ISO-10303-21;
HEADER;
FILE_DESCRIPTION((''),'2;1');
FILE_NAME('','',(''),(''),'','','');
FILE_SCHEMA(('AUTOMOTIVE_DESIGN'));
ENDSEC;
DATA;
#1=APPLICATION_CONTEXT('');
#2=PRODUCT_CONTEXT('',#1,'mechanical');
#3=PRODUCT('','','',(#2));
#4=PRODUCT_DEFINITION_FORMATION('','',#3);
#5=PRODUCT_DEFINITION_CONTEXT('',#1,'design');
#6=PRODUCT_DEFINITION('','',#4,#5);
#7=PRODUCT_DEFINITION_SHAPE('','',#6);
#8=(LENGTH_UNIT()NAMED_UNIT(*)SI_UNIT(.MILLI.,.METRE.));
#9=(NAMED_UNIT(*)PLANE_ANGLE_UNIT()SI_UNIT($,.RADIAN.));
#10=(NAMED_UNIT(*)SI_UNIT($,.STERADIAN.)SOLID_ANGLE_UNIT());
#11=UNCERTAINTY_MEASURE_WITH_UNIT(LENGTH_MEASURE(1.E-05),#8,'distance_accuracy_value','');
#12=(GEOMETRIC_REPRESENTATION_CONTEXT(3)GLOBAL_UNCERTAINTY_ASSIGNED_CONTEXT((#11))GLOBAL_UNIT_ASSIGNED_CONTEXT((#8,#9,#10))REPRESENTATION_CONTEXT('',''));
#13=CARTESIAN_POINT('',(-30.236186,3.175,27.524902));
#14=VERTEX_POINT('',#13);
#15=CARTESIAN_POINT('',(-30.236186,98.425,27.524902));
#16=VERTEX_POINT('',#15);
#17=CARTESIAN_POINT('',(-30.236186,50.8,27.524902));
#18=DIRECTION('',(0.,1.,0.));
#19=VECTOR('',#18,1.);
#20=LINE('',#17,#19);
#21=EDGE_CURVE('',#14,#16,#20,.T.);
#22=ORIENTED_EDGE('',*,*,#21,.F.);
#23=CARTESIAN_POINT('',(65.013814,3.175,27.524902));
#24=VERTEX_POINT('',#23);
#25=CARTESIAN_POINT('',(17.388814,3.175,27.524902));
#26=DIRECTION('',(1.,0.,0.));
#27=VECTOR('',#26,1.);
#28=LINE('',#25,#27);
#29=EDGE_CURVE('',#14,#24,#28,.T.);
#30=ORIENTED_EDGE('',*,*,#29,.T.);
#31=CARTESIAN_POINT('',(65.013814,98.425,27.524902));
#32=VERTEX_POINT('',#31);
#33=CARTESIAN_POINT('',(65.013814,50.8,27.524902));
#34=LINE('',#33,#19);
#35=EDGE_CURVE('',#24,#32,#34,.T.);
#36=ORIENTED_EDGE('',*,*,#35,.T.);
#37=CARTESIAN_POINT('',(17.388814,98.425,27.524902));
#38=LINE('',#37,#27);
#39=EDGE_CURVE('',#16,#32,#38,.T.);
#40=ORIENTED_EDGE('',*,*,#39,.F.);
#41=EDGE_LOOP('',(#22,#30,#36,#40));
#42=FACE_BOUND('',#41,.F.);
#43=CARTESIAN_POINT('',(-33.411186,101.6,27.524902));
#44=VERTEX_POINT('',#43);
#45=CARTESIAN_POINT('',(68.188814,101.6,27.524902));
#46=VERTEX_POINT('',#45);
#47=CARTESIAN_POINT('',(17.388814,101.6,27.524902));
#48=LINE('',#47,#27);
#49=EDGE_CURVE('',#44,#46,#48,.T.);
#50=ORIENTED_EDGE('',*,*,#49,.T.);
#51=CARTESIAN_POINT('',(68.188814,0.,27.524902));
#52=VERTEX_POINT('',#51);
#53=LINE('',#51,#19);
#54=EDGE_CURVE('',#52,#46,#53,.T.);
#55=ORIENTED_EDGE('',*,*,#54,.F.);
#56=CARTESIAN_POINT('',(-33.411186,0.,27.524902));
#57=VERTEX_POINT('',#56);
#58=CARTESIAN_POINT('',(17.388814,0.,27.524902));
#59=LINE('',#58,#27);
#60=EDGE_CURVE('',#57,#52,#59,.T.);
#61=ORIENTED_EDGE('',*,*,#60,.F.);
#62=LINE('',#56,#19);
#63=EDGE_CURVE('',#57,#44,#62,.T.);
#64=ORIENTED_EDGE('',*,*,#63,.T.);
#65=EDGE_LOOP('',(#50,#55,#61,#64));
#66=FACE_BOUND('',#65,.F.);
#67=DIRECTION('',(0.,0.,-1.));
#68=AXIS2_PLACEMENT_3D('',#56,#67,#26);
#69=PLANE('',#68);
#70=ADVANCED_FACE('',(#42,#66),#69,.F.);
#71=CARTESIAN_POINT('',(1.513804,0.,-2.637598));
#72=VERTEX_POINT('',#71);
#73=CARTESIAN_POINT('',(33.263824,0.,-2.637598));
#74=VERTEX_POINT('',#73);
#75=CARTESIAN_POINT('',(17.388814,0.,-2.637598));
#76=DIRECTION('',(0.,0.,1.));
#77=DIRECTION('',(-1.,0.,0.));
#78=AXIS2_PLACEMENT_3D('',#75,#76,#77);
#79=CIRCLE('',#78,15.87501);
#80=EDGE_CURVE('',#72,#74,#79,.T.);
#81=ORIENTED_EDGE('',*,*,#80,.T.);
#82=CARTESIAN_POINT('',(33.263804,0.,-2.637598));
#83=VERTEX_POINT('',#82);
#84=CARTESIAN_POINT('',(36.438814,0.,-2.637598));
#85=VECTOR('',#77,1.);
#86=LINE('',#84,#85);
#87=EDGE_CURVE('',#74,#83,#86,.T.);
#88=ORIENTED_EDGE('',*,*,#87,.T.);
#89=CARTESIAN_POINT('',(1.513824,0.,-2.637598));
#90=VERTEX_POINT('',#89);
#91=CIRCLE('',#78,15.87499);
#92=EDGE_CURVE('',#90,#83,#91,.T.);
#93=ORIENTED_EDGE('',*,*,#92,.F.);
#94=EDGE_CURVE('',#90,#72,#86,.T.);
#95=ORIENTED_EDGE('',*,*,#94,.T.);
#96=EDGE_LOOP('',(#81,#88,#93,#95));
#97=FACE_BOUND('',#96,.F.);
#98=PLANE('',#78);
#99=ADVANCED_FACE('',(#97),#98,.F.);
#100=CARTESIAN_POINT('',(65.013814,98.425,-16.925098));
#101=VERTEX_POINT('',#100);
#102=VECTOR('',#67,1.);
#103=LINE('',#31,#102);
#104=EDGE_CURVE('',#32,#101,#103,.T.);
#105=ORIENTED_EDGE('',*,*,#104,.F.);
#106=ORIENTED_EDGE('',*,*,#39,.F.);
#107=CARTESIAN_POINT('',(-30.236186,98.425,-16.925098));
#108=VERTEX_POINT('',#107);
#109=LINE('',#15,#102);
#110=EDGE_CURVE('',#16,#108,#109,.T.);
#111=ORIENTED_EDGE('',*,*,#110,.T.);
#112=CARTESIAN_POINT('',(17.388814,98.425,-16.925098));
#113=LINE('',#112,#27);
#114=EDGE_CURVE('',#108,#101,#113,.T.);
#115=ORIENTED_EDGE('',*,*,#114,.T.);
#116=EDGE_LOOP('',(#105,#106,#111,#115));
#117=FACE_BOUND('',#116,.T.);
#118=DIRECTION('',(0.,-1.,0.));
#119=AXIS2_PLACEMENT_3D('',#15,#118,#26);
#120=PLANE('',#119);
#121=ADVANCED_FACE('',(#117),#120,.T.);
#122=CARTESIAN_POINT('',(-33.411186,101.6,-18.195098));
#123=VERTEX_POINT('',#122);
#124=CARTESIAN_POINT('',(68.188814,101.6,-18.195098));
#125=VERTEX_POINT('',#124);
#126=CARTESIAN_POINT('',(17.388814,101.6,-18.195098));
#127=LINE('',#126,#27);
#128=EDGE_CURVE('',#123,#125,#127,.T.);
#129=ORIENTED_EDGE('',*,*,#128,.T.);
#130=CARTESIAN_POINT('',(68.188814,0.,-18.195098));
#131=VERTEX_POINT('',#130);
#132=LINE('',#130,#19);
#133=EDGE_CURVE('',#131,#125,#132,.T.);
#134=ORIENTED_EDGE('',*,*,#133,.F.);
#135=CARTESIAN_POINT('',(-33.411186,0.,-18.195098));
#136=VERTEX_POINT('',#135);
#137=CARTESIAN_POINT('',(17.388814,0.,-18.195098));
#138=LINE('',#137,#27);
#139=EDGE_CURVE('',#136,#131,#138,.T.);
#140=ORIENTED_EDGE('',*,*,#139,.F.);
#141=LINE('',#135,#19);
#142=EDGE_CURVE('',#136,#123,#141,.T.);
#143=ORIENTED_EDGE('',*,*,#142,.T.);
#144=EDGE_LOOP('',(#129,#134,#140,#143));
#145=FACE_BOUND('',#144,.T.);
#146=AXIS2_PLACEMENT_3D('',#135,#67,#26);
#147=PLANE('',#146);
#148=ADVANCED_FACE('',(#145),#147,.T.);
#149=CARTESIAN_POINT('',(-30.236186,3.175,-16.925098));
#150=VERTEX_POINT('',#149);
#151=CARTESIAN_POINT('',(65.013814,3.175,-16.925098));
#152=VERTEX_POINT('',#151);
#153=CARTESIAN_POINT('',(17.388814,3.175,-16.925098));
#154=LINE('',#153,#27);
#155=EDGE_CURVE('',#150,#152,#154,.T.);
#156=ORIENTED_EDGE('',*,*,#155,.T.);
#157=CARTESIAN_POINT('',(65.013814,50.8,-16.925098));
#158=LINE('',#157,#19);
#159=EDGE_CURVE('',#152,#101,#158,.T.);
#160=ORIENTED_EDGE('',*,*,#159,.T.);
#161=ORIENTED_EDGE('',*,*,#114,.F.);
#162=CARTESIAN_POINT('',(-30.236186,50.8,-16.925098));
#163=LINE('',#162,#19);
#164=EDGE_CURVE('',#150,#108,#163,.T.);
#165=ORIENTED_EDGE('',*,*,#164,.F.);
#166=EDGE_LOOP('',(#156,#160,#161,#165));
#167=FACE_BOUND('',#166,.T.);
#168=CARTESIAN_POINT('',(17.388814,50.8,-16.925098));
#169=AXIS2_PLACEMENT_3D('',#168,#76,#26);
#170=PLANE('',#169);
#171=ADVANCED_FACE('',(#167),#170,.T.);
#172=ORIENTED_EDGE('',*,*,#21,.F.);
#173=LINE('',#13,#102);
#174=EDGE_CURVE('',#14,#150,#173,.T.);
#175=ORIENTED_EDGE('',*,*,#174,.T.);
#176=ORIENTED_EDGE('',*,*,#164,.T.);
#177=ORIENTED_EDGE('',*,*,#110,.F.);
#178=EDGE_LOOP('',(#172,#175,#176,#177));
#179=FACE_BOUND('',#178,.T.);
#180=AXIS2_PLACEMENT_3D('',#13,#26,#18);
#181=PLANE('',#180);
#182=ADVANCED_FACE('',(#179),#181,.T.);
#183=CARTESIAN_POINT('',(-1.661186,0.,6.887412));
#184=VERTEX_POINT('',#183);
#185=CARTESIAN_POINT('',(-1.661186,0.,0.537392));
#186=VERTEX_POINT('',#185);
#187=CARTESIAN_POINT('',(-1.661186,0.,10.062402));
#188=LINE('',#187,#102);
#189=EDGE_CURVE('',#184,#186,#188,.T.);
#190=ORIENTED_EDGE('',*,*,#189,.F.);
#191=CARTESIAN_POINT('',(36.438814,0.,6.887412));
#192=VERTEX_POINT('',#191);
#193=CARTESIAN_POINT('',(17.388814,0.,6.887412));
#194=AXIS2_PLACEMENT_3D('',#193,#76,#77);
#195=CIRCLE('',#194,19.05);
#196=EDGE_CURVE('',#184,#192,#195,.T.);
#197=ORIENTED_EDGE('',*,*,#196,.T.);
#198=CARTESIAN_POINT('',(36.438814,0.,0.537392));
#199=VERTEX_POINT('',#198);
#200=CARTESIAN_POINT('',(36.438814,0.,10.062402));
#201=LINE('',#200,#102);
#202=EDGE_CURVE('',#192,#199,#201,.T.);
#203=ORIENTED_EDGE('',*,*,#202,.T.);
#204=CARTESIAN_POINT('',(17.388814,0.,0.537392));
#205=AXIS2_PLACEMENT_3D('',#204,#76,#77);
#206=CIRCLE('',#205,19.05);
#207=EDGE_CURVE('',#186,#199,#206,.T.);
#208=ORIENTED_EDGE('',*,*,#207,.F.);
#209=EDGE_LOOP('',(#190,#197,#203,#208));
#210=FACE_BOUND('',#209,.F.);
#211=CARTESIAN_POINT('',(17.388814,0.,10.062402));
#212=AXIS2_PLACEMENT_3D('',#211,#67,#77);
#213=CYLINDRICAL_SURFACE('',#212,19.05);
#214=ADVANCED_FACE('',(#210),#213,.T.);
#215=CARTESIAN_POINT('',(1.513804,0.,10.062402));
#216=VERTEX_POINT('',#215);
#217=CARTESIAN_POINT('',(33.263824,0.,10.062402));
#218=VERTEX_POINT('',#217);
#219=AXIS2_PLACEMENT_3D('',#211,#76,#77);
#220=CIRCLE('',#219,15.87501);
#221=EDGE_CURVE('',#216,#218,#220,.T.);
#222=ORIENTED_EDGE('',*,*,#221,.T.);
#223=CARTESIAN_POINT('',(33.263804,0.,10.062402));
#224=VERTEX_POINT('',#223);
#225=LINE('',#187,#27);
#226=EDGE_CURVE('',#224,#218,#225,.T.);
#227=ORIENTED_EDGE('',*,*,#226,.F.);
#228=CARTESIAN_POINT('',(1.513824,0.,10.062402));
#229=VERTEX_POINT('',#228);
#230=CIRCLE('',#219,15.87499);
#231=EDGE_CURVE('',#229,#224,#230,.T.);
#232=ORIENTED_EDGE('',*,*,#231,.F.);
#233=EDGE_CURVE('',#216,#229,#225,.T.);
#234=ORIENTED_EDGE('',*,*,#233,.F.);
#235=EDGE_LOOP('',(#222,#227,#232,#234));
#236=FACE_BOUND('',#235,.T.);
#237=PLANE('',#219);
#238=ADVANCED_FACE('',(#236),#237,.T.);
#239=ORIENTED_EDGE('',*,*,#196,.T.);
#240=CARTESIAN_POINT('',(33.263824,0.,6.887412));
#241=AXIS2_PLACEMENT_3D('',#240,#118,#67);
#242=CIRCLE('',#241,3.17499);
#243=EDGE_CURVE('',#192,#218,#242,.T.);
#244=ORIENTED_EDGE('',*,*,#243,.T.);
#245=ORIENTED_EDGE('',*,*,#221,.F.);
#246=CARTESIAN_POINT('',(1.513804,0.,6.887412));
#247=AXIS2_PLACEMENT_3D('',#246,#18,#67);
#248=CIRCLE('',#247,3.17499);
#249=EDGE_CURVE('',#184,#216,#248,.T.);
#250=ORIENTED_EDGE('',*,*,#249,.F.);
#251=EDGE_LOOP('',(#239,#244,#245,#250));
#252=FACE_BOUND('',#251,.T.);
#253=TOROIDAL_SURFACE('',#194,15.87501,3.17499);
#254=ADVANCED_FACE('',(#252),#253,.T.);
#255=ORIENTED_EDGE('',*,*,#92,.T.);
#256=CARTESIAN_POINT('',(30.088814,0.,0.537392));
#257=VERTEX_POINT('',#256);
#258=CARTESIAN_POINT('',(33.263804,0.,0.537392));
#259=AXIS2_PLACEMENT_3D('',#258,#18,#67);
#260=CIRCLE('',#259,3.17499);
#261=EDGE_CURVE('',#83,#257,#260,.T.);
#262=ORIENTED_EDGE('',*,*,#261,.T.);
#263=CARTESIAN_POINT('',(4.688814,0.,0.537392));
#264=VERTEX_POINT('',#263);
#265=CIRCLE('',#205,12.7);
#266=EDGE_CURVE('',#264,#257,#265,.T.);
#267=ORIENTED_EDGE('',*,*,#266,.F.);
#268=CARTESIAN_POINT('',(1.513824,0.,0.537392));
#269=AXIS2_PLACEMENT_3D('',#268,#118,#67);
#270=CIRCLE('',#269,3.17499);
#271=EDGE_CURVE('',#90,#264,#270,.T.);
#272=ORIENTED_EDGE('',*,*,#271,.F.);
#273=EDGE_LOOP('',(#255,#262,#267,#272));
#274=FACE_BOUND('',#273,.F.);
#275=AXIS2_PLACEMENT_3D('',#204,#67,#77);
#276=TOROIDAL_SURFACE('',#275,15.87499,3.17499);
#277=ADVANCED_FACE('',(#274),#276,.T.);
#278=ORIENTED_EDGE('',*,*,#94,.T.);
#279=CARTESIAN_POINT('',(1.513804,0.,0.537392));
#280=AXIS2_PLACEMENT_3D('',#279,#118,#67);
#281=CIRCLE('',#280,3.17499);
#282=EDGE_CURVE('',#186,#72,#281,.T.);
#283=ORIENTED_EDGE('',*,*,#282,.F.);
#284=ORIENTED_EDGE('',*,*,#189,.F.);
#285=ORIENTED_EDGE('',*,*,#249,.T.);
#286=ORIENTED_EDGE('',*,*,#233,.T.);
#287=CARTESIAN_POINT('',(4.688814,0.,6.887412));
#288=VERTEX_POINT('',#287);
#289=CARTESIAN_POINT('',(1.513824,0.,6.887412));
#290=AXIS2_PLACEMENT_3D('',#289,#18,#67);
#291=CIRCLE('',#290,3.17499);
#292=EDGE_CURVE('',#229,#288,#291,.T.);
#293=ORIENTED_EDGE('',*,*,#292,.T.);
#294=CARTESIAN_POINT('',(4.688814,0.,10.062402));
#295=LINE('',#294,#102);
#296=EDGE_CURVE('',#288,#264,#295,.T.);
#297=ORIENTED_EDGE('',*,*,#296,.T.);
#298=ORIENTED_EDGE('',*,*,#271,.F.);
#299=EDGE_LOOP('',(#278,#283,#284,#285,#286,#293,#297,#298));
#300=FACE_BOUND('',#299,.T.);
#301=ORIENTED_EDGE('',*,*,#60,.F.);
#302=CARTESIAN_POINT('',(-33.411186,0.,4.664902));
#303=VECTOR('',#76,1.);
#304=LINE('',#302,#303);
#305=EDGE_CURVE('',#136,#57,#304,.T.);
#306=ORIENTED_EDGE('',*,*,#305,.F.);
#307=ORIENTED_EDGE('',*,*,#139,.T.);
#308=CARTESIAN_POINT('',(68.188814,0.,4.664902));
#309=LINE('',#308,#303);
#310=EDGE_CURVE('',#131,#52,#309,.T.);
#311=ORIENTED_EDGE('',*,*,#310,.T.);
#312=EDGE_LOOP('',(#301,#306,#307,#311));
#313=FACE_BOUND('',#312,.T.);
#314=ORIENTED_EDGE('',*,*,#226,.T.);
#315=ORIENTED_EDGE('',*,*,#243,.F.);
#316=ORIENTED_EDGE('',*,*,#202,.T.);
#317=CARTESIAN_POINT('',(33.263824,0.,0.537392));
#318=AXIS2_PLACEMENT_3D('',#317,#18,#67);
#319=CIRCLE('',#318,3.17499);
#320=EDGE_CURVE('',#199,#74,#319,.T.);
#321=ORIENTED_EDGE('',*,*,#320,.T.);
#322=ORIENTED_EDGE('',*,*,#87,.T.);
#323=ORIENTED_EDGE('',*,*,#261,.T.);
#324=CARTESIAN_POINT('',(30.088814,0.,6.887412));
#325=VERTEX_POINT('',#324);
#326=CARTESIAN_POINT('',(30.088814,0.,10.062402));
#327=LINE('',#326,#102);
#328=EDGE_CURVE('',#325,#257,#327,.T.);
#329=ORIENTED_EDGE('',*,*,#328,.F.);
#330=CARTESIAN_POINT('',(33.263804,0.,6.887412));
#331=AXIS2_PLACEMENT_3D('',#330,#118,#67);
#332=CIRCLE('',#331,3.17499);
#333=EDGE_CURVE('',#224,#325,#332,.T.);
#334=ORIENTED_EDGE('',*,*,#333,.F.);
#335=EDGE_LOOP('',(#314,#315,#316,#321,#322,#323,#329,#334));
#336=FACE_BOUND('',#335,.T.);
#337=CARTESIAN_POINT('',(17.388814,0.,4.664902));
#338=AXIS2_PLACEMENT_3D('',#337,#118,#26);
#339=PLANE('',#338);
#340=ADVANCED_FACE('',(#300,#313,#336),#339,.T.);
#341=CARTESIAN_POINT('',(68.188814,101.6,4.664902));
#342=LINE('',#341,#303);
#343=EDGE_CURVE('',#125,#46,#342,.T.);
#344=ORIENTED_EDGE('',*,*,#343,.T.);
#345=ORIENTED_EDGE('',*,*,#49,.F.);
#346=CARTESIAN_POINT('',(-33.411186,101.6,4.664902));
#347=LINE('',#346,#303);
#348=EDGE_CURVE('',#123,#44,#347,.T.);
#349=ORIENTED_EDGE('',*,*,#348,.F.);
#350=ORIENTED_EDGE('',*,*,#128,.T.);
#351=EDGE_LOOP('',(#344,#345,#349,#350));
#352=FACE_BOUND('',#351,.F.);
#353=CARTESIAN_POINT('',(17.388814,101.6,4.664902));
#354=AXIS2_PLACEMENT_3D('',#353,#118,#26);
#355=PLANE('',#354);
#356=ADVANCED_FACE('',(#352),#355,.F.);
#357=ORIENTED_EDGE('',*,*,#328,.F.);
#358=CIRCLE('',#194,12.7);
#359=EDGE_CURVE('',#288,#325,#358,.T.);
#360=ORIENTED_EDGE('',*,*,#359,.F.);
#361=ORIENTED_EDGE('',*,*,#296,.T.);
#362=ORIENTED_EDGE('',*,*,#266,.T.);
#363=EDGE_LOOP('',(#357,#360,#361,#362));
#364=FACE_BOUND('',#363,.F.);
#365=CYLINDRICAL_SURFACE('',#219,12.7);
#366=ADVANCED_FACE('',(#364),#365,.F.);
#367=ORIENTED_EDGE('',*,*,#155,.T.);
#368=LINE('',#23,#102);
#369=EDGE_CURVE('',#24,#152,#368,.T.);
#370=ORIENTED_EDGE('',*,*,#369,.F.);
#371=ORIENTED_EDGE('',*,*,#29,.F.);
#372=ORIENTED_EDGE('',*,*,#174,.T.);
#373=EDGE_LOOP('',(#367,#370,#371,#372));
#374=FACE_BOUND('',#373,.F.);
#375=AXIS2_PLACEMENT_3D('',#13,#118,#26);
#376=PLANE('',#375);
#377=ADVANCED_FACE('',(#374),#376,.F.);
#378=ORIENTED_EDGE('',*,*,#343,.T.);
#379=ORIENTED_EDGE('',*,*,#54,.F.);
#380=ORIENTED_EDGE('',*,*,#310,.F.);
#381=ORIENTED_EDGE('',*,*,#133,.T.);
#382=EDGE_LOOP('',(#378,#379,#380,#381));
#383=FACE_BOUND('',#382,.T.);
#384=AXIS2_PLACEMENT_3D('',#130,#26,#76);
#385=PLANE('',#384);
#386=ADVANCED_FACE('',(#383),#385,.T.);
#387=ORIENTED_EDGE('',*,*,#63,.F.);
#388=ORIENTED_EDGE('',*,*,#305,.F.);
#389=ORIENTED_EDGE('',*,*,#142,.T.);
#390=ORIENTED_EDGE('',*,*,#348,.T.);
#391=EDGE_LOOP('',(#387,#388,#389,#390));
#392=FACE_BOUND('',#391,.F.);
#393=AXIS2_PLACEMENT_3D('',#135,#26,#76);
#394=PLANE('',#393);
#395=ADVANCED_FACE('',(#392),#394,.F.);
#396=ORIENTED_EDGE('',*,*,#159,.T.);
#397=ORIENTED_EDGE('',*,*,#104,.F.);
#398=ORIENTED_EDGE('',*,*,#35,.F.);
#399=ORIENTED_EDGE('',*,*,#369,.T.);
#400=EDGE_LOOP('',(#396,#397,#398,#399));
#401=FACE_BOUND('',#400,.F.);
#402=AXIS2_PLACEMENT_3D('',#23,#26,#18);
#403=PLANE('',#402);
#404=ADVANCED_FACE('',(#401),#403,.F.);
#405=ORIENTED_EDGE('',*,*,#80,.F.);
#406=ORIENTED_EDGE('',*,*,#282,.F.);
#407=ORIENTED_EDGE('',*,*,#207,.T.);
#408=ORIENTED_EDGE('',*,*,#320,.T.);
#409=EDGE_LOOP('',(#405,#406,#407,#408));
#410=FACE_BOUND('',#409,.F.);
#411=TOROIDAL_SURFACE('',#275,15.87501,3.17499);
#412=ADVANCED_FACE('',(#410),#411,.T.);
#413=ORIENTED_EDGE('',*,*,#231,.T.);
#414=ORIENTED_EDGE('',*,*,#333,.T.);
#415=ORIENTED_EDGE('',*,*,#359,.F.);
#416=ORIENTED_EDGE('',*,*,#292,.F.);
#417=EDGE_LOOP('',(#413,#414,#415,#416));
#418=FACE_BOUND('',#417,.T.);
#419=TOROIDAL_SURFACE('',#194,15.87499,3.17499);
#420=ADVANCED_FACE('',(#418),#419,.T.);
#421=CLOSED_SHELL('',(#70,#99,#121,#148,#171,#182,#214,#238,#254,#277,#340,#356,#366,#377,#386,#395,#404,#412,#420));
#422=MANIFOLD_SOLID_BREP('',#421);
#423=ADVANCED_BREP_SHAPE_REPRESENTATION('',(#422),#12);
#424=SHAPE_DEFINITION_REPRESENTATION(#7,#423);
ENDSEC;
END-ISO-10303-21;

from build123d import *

# Parameters (mm, degrees)
F0_W     = 101.6
F0_H     = 45.72
F1_DEPTH = 101.6
F2_W     = 95.25
F2_H     = 95.25
F3_DEPTH = 44.45
F4_W     = 19.05
F4_H     = 6.35
F5_ANGLE = 180
F7_DEPTH = 25.4
F8_R     = 3.17499


# Not quite as in the source:
# - a fillet or chamfer is up to 0.001 mm smaller than in the source, because OpenCascade refuses the exact size


with BuildPart() as f1:
    # F0 (on Front) → F1 (new body)
    with BuildSketch(Plane.XZ):
        with Locations((17.3888143581, 4.6649015626)):
            Rectangle(F0_W, F0_H)
    extrude(amount=-F1_DEPTH)

    # F2 (on face) → F3 (cut)
    with BuildSketch(Plane.XY.offset(27.5249015626)):
        with Locations((17.3888143581, 50.8)):
            Rectangle(F2_W, F2_H)
    extrude(amount=-F3_DEPTH, mode=Mode.SUBTRACT)

    # F4 (on face) → F5 (revolve)
    with BuildSketch(Plane.XZ):
        with Locations((7.8638143581, 6.8874015626)):
            Rectangle(F4_W, F4_H)
        with Locations((7.8638143581, 0.5374015626)):
            Rectangle(F4_W, F4_H)
    revolve(axis=Axis((17.3888143581, 0, 3.7124015626), (0, 0, 1)), revolution_arc=F5_ANGLE)

    # F6 (on face) → F7 (cut)
    with BuildSketch(Plane.XY.offset(10.0624015626)):
        with BuildLine():
            Line((30.0888143581, 0), (4.6888143581, 0))
            ThreePointArc((4.6888143581, 0), (17.3888143581, -12.7), (30.0888143581, 0))
        make_face()
    extrude(amount=-F7_DEPTH, mode=Mode.SUBTRACT)

    # F8 (radius 3.175 in the source; OpenCascade refuses exactly that, so slightly less here)
    f8_edges = [f1.edges().sort_by_distance(p)[0] for p in [
        (17.388814, -19.05, 10.062402),
        (17.388814, -12.7, 10.062402),
        (17.388814, -19.05, -2.637598),
        (17.388814, -12.7, -2.637598),
    ]]
    fillet(f8_edges, radius=F8_R)


solid = f1.part
